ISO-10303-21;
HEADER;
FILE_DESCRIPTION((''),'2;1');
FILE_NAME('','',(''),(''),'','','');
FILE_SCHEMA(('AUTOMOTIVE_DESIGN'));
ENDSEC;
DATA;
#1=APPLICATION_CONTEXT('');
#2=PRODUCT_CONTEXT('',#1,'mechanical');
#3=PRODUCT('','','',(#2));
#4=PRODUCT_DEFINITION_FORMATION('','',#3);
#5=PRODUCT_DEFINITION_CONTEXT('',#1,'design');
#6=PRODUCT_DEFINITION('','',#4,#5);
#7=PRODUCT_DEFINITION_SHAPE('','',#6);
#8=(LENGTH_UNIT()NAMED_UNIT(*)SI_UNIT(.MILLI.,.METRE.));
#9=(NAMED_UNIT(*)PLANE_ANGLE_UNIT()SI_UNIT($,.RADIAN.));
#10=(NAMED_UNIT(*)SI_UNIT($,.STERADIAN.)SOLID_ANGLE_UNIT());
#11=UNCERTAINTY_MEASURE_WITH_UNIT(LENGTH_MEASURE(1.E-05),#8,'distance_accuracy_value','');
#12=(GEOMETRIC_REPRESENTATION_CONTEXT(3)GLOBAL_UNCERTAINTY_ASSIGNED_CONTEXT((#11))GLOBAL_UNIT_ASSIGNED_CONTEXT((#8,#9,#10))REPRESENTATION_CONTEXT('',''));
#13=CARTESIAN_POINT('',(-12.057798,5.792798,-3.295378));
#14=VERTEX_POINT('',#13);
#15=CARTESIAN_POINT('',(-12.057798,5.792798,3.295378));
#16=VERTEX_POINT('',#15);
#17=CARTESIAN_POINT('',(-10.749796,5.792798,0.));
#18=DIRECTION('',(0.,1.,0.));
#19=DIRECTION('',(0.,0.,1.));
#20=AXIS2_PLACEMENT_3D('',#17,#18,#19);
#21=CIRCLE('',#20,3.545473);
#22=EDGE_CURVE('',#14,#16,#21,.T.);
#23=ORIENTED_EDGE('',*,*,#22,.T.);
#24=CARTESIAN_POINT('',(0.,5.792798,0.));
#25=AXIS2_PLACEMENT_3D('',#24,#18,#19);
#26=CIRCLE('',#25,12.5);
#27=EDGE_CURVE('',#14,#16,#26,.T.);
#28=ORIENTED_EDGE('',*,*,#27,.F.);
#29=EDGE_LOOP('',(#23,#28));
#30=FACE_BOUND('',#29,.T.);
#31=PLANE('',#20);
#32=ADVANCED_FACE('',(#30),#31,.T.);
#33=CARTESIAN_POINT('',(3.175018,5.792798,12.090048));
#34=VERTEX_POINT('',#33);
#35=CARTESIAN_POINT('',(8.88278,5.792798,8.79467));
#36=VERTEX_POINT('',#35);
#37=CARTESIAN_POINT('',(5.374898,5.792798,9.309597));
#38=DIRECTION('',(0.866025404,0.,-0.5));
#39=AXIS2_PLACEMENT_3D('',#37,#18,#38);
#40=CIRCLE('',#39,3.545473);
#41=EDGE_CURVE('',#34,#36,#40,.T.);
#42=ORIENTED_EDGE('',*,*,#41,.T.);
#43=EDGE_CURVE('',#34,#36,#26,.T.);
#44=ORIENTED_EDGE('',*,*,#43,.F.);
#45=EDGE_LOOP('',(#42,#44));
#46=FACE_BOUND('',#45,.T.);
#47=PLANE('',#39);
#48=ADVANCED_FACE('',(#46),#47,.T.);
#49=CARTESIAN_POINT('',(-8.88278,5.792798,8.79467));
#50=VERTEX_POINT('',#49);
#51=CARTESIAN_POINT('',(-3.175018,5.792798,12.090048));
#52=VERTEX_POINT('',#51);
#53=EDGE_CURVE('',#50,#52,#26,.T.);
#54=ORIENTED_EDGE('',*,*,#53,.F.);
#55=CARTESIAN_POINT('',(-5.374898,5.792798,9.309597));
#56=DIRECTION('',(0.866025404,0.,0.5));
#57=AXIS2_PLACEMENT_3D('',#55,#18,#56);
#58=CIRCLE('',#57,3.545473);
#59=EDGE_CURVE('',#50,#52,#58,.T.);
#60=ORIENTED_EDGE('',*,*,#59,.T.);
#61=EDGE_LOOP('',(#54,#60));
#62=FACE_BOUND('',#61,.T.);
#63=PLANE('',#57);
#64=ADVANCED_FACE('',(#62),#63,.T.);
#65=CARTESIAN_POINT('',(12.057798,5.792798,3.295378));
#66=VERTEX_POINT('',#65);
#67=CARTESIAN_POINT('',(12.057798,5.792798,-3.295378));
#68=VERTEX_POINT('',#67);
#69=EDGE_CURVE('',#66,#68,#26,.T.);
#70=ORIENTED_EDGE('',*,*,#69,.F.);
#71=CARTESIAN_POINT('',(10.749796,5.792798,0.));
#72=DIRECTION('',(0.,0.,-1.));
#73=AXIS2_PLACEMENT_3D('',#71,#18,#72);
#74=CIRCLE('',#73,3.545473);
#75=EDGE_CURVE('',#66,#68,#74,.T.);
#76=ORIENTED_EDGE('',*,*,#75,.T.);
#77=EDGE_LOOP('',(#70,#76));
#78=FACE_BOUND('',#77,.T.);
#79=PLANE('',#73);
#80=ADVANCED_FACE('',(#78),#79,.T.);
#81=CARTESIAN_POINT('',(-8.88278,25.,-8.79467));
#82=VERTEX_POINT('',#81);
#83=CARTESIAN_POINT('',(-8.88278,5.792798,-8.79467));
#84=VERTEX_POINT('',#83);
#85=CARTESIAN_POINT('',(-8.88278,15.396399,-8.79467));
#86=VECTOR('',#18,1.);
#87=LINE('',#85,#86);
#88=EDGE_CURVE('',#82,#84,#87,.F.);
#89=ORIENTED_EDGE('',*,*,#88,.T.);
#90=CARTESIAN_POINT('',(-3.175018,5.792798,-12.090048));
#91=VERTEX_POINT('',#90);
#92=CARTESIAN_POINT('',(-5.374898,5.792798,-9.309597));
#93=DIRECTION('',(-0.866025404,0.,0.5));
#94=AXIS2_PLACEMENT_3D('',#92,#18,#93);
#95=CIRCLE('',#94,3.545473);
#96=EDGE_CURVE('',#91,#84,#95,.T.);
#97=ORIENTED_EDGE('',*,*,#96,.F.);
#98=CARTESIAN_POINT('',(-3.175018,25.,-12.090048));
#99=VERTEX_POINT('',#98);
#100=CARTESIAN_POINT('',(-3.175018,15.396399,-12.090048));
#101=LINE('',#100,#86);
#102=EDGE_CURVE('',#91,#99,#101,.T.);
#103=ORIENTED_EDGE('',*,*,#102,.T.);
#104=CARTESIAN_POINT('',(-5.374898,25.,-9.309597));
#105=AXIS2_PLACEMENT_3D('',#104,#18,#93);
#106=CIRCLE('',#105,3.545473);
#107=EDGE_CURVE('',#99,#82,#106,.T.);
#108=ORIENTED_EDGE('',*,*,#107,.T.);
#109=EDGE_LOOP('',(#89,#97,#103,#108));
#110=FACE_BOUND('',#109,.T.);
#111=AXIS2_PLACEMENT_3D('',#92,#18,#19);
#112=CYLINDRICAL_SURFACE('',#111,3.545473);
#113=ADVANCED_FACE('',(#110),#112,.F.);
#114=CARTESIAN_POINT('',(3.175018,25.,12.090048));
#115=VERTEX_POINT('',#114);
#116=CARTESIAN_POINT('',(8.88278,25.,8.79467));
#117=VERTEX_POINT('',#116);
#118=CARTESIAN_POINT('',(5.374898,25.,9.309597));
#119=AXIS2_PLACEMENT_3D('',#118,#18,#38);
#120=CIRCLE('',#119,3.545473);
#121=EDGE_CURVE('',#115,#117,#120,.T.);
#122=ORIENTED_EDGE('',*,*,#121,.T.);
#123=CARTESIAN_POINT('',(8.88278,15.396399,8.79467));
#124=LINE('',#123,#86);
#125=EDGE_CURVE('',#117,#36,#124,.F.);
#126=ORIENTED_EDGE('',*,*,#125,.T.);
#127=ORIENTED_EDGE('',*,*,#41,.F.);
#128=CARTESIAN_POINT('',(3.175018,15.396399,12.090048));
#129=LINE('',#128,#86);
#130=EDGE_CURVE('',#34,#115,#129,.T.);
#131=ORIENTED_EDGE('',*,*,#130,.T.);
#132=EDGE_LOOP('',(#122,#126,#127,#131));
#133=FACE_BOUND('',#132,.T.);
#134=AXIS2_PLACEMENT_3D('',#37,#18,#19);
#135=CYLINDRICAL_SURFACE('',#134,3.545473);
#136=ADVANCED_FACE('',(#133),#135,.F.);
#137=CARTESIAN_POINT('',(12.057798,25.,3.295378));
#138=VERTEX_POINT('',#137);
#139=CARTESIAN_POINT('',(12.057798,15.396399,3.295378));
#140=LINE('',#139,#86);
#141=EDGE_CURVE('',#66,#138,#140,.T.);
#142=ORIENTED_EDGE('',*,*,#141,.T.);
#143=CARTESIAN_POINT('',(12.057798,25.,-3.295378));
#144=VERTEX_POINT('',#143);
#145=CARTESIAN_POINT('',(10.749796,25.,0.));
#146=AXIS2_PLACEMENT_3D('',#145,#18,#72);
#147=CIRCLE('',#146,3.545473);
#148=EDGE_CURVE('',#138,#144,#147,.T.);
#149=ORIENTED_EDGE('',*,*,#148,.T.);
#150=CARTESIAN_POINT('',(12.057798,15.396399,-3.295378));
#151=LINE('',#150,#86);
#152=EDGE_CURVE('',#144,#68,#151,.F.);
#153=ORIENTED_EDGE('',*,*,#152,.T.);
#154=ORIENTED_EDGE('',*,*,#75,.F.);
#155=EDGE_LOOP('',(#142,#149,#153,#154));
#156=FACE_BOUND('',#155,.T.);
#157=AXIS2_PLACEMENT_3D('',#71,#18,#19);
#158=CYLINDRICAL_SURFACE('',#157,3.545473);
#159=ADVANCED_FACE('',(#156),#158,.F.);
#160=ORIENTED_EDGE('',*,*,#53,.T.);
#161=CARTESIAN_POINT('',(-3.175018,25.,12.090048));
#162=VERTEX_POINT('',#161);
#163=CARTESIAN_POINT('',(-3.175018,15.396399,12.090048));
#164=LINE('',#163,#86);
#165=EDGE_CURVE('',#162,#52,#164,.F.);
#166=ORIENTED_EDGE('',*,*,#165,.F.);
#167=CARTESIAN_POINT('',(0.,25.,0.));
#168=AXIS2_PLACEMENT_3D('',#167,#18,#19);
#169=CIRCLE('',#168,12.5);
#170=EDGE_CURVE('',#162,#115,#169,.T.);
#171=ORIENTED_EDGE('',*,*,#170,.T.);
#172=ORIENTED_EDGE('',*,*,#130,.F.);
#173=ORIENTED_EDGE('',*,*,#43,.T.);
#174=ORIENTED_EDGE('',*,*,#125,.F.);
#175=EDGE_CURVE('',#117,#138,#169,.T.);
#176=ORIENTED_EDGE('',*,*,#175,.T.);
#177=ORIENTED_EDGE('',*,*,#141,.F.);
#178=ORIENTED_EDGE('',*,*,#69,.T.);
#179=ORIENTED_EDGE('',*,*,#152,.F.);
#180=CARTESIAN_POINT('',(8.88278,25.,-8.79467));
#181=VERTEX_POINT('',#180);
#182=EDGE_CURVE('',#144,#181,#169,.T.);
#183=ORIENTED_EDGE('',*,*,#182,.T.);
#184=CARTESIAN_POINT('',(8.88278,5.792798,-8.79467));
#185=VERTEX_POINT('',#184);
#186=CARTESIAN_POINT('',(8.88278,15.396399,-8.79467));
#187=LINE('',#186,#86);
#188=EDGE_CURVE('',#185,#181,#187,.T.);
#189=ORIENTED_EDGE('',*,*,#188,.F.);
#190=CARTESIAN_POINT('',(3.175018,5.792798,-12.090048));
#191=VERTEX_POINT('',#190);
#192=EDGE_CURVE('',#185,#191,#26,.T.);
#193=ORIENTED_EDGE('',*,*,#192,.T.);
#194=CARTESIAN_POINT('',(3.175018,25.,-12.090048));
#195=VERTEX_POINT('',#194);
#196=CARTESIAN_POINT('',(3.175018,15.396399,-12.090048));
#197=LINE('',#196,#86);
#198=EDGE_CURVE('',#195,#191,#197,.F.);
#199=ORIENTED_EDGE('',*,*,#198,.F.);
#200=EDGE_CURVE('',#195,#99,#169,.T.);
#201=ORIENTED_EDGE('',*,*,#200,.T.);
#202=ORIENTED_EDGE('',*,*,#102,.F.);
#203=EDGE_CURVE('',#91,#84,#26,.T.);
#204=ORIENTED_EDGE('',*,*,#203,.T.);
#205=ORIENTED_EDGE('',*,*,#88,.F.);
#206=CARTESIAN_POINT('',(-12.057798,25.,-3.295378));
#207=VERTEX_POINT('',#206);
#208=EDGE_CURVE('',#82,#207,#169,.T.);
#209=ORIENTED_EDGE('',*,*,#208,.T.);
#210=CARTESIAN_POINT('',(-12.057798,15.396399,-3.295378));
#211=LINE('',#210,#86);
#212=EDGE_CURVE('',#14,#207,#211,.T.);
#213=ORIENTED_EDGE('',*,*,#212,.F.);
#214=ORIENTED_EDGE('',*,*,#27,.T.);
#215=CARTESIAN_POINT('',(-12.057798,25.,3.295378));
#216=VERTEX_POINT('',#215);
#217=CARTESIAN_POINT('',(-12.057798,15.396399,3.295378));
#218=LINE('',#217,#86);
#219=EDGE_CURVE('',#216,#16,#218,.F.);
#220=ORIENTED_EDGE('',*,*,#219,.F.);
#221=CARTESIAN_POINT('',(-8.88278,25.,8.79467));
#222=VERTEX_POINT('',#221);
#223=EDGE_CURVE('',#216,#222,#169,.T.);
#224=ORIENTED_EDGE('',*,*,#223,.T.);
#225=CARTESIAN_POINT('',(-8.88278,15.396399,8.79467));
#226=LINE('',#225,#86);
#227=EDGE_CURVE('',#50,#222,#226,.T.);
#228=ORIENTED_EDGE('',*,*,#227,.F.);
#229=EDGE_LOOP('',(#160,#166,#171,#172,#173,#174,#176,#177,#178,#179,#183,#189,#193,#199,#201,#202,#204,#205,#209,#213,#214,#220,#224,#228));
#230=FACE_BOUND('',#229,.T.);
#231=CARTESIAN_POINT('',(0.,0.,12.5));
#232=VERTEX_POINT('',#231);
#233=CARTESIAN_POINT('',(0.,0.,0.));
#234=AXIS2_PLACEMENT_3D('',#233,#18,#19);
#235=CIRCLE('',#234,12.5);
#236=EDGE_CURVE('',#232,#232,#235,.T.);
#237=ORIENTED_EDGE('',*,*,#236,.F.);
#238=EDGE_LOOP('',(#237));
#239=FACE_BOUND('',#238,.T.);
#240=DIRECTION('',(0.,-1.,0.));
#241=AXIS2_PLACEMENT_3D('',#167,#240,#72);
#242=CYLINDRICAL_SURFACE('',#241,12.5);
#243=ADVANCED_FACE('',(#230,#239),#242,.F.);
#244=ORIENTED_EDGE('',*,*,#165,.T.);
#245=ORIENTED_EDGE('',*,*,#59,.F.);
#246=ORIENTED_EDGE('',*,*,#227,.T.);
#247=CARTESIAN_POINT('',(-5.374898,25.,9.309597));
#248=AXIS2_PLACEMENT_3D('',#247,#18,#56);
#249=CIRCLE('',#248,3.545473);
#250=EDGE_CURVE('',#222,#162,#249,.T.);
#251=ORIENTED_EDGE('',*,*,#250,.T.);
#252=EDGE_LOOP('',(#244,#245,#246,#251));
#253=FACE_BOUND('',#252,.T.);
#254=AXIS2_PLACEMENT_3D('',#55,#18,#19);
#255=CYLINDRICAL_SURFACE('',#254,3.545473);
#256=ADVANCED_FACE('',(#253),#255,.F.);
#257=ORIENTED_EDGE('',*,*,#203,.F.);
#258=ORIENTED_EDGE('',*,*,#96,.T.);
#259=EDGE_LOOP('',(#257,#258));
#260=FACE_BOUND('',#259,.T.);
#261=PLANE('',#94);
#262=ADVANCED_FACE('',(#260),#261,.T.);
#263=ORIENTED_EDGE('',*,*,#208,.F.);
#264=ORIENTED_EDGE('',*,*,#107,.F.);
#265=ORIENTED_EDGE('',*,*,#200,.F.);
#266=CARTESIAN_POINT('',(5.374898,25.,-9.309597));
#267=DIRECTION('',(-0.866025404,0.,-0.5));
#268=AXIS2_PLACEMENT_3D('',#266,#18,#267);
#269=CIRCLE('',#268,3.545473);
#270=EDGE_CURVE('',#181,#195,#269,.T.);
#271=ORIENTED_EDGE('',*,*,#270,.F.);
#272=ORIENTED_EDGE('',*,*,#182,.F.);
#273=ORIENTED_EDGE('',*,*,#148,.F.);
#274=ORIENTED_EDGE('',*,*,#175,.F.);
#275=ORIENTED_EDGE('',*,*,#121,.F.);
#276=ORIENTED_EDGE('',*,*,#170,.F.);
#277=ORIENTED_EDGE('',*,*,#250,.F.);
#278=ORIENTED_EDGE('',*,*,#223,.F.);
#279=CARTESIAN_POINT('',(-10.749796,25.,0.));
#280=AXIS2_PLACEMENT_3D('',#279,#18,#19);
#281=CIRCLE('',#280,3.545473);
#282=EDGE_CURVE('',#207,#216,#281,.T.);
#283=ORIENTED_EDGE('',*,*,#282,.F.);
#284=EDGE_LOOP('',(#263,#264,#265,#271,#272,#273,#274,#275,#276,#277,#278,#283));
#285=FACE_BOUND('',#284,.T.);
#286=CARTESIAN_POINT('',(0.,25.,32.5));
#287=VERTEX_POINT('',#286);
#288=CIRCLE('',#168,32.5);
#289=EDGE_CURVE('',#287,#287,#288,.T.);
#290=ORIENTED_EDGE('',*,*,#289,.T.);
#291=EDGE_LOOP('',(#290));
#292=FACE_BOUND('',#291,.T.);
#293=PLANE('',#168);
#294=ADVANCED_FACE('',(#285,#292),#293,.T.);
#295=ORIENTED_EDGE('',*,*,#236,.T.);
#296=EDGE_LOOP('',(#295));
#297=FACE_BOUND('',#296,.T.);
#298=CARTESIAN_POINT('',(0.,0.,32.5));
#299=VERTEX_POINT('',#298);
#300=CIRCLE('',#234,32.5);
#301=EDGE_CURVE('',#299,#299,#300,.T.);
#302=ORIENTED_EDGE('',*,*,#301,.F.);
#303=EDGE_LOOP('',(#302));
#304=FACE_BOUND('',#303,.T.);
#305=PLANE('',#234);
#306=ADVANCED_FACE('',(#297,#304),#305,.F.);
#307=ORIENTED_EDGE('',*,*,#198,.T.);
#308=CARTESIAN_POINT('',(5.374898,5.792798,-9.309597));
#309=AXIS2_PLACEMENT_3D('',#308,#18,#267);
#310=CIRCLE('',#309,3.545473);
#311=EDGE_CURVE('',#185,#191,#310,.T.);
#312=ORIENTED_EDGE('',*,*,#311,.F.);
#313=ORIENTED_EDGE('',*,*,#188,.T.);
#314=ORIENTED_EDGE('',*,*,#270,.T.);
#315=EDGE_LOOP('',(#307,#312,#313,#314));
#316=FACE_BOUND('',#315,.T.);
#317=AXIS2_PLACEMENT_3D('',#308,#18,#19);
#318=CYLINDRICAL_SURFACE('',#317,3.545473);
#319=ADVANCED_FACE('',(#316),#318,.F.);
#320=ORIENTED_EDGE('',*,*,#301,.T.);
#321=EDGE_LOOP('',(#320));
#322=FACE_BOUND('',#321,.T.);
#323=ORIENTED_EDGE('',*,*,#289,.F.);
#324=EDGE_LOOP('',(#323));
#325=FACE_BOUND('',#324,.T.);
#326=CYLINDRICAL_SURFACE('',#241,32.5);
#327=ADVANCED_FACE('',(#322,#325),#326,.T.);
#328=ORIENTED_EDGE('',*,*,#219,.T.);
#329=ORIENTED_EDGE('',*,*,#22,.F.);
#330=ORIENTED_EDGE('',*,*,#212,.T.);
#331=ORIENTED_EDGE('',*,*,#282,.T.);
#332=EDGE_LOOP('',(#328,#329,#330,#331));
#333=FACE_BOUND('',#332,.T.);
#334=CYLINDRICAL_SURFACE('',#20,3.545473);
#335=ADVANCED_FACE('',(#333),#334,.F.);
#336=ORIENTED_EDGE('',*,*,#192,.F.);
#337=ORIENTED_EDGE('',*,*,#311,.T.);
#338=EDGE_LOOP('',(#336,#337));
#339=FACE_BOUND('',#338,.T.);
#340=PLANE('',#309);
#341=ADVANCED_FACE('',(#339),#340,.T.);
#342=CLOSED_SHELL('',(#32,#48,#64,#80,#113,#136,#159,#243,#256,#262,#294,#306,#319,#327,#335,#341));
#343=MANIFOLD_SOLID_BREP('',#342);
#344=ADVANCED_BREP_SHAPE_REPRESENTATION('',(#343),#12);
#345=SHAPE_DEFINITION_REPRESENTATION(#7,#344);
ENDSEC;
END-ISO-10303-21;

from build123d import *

# Parameters (mm, degrees)
SKETCH1_R           = 32.5
BOSS_EXTRUDE1_DEPTH = 25
SKETCH2_R           = 12.5
CUT_EXTRUDE1_DEPTH  = 53.321123841
SKETCH3_R           = 3.545473372
CUT_EXTRUDE2_DEPTH  = 19.207201728
CIRPATTERN1_COUNT   = 6


with BuildPart() as part:
    # Sketch1 → Boss-Extrude1 (new body)
    with BuildSketch(Plane(origin=(0, 0, 0), x_dir=(1, 0, 0), z_dir=(0, 1, 0))):
        Circle(SKETCH1_R)
    extrude(amount=BOSS_EXTRUDE1_DEPTH)

    # Sketch2 → Cut-Extrude1 (cut, through all)
    with BuildSketch(Plane(origin=(0, 0, 0), x_dir=(1, 0, 0), z_dir=(0, 1, 0))):
        Circle(SKETCH2_R)
    extrude(amount=CUT_EXTRUDE1_DEPTH, mode=Mode.SUBTRACT)

    # Sketch3 → Cut-Extrude2 (cut)
    with BuildSketch(Plane(origin=(0, 25, 0), x_dir=(1, 0, 0), z_dir=(0, 1, 0))):
        with Locations((-10.749796291, 0)):
            Circle(SKETCH3_R)
    cut_extrude2 = extrude(amount=-CUT_EXTRUDE2_DEPTH, mode=Mode.SUBTRACT)

    # CirPattern1: Cut-Extrude2 ×6 about axis
    cirpattern1_axis = Axis((0, 0, 0), (0, 1, 0))
    for i in range(1, CIRPATTERN1_COUNT):
        add(cut_extrude2.rotate(cirpattern1_axis, i * 360 / CIRPATTERN1_COUNT), mode=Mode.SUBTRACT)


solid = part.part
